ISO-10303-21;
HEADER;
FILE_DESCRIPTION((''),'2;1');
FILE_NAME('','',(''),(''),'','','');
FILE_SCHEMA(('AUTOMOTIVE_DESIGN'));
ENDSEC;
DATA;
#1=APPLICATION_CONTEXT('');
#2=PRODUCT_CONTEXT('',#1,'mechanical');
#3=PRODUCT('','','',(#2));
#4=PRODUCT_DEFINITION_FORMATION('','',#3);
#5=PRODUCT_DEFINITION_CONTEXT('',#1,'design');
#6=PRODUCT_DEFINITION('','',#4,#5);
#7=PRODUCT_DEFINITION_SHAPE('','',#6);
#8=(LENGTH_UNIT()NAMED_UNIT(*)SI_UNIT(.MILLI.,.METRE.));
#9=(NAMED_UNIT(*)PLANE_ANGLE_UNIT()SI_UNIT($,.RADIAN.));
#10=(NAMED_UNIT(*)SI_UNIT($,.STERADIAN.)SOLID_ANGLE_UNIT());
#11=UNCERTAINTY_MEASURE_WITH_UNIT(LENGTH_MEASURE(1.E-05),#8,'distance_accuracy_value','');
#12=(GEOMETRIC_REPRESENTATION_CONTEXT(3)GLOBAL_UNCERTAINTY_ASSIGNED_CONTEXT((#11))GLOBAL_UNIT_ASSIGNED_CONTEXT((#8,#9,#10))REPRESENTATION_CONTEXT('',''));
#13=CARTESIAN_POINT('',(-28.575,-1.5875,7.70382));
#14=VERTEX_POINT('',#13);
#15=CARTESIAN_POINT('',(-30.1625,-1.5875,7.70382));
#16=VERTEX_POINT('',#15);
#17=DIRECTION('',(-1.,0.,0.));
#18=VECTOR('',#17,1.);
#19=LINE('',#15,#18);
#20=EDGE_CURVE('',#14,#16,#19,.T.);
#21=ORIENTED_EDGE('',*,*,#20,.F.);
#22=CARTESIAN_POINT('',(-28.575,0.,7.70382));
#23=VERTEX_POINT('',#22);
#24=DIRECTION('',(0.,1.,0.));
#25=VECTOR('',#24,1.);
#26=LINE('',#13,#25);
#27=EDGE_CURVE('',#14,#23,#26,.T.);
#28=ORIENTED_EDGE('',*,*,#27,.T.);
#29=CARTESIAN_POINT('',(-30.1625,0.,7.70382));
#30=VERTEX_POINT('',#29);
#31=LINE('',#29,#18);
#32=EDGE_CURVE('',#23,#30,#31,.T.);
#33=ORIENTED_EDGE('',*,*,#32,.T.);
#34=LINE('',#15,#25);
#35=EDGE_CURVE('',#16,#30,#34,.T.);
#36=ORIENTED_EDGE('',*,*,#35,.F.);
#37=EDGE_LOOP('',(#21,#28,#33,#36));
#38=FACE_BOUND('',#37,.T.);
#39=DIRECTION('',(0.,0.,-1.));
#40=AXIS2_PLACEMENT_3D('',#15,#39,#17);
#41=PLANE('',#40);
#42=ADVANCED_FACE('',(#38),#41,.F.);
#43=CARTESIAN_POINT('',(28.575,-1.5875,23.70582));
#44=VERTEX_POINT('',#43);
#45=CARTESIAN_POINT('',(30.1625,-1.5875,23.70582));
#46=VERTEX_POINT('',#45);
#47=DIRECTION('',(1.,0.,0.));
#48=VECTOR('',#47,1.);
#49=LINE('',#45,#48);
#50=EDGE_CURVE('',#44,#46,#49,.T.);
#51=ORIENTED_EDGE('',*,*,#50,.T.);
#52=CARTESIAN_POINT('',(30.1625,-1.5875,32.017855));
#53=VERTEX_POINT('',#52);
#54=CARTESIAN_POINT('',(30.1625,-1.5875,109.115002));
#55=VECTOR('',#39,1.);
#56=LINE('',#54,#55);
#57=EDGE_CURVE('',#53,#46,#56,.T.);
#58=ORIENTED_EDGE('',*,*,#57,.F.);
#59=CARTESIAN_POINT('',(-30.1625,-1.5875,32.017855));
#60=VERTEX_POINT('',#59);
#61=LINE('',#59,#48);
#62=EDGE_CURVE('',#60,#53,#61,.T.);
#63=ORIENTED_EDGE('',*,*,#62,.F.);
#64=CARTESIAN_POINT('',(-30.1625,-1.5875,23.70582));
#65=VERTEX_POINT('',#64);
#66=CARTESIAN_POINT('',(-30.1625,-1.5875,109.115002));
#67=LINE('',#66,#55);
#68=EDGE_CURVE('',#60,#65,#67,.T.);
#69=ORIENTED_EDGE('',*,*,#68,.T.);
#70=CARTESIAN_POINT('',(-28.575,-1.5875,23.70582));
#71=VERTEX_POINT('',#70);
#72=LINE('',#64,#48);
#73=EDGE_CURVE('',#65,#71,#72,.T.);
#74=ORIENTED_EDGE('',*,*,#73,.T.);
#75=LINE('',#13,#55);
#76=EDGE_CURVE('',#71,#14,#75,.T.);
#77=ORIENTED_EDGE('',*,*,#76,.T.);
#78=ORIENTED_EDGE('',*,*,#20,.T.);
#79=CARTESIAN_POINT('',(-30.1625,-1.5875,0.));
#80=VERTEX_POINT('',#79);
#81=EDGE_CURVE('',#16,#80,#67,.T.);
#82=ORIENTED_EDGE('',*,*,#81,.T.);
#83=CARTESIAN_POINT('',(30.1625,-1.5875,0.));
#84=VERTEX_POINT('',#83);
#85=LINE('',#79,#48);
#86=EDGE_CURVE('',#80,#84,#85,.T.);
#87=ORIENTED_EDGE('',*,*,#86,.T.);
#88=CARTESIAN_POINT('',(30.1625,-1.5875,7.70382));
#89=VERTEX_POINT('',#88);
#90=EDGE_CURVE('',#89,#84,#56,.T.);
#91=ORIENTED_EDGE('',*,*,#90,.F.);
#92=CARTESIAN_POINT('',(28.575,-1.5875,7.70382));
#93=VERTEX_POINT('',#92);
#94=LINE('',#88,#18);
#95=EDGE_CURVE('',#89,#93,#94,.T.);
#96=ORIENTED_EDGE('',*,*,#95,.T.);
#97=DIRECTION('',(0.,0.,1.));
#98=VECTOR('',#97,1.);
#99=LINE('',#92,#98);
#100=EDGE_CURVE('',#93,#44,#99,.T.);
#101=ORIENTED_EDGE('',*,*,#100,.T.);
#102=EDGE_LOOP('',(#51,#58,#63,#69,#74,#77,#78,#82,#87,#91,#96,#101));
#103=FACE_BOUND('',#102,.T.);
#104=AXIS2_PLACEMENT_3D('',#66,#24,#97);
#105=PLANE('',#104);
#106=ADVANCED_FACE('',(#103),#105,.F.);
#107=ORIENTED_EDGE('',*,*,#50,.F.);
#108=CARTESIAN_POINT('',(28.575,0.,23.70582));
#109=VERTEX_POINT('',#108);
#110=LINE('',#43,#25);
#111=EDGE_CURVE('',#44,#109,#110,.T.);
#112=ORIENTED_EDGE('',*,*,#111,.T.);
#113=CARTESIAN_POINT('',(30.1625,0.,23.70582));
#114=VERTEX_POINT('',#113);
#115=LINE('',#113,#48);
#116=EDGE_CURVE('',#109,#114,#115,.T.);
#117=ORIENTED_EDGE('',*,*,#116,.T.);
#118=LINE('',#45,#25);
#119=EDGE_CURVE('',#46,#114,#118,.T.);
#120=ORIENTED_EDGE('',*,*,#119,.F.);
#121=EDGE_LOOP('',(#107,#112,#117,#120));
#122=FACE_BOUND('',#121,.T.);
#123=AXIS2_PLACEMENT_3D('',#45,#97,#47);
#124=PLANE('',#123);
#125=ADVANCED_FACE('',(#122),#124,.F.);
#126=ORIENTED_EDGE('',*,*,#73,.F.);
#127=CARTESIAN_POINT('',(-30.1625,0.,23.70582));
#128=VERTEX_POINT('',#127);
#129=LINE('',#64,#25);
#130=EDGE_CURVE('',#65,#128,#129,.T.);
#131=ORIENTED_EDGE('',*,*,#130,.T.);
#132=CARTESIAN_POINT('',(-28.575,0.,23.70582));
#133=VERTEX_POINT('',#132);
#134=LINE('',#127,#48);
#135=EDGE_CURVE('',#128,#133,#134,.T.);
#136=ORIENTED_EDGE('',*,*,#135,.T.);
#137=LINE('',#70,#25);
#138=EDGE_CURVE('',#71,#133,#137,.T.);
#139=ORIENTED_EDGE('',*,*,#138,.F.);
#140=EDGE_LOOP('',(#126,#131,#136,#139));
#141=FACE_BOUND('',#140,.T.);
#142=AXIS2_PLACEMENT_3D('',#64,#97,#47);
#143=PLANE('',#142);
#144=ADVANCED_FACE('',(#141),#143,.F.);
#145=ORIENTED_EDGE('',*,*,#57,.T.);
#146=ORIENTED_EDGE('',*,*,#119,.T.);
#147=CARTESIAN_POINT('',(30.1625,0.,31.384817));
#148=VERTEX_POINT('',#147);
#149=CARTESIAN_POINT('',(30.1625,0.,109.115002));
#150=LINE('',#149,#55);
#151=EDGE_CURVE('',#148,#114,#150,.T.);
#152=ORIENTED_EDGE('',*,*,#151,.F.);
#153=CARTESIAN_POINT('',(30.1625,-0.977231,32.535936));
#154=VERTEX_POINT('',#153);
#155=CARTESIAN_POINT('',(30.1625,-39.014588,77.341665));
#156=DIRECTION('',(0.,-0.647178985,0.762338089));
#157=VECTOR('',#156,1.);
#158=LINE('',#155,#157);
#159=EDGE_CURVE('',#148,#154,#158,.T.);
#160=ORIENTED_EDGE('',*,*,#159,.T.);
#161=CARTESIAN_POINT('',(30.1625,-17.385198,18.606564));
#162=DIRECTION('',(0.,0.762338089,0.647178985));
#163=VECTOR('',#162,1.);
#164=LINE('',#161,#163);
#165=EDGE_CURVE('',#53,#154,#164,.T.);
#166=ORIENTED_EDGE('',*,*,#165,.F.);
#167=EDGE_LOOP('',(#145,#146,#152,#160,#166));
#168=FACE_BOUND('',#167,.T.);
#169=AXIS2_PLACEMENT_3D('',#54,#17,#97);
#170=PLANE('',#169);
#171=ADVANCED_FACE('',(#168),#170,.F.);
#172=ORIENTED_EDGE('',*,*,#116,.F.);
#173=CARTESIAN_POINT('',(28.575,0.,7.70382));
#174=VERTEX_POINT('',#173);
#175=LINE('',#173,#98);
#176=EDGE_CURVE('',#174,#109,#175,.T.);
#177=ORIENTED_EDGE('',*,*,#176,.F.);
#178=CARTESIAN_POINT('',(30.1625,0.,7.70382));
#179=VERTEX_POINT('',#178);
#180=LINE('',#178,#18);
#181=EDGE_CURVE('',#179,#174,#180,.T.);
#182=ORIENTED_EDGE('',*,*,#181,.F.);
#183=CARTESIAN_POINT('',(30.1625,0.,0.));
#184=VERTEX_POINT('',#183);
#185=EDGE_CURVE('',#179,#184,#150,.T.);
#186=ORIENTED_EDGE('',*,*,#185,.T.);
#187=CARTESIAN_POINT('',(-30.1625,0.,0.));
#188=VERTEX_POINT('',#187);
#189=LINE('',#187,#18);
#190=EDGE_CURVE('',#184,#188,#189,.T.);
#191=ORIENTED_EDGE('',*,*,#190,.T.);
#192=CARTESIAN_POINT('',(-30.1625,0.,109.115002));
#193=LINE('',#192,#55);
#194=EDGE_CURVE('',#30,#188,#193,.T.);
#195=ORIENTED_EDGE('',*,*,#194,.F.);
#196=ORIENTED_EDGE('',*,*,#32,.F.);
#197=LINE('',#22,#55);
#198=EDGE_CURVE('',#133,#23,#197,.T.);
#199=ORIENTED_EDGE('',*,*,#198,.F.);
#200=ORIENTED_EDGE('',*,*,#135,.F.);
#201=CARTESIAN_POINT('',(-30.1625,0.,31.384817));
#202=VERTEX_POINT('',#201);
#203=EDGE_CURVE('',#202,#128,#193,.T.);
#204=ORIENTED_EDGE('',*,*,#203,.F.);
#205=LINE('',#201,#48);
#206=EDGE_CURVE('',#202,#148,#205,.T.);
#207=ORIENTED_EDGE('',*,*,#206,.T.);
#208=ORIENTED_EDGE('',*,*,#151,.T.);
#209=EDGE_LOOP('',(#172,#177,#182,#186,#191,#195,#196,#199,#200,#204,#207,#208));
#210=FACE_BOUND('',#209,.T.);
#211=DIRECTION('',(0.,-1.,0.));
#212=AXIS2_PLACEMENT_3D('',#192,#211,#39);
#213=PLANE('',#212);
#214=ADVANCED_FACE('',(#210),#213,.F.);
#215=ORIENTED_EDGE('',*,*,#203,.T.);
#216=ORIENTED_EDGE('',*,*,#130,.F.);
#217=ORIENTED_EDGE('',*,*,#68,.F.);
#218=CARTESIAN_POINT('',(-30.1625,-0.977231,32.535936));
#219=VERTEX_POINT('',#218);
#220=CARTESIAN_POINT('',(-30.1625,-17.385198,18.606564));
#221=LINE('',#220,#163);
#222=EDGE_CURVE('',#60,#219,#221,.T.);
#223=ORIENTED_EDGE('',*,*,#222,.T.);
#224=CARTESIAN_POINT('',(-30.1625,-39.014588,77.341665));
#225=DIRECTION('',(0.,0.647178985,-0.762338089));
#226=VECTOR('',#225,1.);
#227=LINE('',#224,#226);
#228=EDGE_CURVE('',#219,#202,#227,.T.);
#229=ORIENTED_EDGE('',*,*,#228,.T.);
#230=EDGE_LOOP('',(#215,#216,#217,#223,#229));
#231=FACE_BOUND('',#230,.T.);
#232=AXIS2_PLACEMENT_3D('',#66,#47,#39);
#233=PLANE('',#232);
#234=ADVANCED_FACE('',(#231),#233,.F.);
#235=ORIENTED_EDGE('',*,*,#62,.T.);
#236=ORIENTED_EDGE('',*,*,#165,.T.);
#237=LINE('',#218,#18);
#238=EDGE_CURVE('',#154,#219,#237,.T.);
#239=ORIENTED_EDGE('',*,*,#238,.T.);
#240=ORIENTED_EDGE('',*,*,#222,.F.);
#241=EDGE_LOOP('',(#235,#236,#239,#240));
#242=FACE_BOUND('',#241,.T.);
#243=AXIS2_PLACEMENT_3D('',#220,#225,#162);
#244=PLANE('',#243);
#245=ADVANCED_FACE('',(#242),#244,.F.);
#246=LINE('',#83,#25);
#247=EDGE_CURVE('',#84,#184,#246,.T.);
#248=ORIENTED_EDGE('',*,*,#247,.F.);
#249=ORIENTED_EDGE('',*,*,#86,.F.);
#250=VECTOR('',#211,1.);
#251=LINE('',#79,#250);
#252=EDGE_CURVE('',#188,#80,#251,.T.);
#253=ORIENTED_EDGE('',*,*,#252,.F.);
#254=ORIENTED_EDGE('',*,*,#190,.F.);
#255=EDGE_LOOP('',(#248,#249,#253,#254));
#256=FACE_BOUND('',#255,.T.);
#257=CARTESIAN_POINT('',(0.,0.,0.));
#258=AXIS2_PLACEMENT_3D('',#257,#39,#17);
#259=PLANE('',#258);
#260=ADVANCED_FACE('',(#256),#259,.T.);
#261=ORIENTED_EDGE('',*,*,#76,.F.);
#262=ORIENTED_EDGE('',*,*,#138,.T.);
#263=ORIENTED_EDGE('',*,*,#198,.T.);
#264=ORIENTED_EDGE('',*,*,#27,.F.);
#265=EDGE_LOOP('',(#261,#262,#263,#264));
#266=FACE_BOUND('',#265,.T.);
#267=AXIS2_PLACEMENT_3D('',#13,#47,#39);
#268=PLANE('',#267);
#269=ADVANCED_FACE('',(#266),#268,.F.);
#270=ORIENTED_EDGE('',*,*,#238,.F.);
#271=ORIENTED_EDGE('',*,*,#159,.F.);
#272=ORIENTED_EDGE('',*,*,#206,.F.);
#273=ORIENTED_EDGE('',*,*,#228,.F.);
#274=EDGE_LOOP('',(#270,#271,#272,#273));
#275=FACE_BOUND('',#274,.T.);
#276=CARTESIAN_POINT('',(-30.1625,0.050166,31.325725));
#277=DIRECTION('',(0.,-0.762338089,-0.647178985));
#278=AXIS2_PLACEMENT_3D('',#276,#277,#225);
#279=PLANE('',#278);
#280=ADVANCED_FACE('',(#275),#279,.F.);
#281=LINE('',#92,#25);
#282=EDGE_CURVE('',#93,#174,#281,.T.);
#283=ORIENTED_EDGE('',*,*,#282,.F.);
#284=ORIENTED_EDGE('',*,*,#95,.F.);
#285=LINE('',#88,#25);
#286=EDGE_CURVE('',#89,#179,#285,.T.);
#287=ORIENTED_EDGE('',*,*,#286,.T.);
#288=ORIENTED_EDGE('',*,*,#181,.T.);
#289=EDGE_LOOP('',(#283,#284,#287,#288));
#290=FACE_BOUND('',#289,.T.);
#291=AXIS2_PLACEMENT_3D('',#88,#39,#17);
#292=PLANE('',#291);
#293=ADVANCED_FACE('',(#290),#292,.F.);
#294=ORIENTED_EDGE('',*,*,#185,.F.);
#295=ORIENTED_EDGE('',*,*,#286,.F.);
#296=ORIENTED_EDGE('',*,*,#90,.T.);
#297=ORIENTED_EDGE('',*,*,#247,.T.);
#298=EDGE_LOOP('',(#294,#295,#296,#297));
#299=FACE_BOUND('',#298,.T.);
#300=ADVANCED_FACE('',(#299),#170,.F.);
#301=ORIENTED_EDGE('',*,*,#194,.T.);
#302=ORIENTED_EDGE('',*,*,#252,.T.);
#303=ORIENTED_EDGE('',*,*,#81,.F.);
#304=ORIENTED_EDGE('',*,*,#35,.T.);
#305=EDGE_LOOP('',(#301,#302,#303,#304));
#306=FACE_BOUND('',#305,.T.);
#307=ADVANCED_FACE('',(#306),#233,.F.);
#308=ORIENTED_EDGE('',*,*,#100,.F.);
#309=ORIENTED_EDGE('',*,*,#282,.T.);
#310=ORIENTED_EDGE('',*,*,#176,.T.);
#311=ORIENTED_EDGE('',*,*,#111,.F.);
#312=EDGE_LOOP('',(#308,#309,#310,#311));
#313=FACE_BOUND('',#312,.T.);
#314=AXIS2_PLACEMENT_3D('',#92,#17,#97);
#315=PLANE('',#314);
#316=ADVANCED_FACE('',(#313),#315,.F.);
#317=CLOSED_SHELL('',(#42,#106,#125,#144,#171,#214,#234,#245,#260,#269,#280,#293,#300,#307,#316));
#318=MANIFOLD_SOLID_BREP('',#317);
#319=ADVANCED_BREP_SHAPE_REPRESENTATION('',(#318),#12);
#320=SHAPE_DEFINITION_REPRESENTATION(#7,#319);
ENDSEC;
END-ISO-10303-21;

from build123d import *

# Parameters (mm, degrees)
BOSS_EXTRUDE1_START = -30.1625
BOSS_EXTRUDE1_DEPTH = 60.325
CUT_EXTRUDE3_REACH  = 45.791
SKETCH2_W           = 60.325
SKETCH2_H           = 6.35
SKETCH3_W           = 1.5875
SKETCH3_H           = 16.002
CUT_EXTRUDE4_DEPTH  = 45.394636066


# Read off the part's stored shape, not the designer's step: Boss-Extrude1
with BuildPart() as part:
    # Boss-Extrude1 outline → Boss-Extrude1 (new body)
    with BuildSketch(Plane.YZ.offset(BOSS_EXTRUDE1_START)):
        Polygon((-1.5875, 33.25479651), (-1.5875, 0), (0, 0), (0, 31.384816574), align=None)
    extrude(amount=BOSS_EXTRUDE1_DEPTH)

    # Sketch2 → Cut-Extrude3 (cut, up to next)
    with BuildSketch(Plane(origin=(0, 18.958587107, 9.052736266), x_dir=(1, 0, 0), z_dir=(0, 0.7623380888196845, 0.6471789847752716)), mode=Mode.PRIVATE) as cut_extrude3_sk1:
        with Locations((0, -33.979180387)):
            Rectangle(SKETCH2_W, SKETCH2_H)
    cut_extrude3_tool1 = extrude(cut_extrude3_sk1.sketch, amount=-CUT_EXTRUDE3_REACH, mode=Mode.PRIVATE) & part.part
    add(cut_extrude3_tool1.solids().sort_by_distance((0, -3.032024, 34.95636))[0], mode=Mode.SUBTRACT)

    # Sketch3 → Cut-Extrude4 (cut, through all)
    with BuildSketch(Plane(origin=(0, 0, 0), x_dir=(1, 0, 0), z_dir=(0, 1, 0))):
        with Locations((29.36875, -15.70482)):
            Rectangle(SKETCH3_W, SKETCH3_H)
        with Locations((-29.36875, -15.70482)):
            Rectangle(SKETCH3_W, SKETCH3_H)
    extrude(amount=-CUT_EXTRUDE4_DEPTH, mode=Mode.SUBTRACT)


solid = part.part
